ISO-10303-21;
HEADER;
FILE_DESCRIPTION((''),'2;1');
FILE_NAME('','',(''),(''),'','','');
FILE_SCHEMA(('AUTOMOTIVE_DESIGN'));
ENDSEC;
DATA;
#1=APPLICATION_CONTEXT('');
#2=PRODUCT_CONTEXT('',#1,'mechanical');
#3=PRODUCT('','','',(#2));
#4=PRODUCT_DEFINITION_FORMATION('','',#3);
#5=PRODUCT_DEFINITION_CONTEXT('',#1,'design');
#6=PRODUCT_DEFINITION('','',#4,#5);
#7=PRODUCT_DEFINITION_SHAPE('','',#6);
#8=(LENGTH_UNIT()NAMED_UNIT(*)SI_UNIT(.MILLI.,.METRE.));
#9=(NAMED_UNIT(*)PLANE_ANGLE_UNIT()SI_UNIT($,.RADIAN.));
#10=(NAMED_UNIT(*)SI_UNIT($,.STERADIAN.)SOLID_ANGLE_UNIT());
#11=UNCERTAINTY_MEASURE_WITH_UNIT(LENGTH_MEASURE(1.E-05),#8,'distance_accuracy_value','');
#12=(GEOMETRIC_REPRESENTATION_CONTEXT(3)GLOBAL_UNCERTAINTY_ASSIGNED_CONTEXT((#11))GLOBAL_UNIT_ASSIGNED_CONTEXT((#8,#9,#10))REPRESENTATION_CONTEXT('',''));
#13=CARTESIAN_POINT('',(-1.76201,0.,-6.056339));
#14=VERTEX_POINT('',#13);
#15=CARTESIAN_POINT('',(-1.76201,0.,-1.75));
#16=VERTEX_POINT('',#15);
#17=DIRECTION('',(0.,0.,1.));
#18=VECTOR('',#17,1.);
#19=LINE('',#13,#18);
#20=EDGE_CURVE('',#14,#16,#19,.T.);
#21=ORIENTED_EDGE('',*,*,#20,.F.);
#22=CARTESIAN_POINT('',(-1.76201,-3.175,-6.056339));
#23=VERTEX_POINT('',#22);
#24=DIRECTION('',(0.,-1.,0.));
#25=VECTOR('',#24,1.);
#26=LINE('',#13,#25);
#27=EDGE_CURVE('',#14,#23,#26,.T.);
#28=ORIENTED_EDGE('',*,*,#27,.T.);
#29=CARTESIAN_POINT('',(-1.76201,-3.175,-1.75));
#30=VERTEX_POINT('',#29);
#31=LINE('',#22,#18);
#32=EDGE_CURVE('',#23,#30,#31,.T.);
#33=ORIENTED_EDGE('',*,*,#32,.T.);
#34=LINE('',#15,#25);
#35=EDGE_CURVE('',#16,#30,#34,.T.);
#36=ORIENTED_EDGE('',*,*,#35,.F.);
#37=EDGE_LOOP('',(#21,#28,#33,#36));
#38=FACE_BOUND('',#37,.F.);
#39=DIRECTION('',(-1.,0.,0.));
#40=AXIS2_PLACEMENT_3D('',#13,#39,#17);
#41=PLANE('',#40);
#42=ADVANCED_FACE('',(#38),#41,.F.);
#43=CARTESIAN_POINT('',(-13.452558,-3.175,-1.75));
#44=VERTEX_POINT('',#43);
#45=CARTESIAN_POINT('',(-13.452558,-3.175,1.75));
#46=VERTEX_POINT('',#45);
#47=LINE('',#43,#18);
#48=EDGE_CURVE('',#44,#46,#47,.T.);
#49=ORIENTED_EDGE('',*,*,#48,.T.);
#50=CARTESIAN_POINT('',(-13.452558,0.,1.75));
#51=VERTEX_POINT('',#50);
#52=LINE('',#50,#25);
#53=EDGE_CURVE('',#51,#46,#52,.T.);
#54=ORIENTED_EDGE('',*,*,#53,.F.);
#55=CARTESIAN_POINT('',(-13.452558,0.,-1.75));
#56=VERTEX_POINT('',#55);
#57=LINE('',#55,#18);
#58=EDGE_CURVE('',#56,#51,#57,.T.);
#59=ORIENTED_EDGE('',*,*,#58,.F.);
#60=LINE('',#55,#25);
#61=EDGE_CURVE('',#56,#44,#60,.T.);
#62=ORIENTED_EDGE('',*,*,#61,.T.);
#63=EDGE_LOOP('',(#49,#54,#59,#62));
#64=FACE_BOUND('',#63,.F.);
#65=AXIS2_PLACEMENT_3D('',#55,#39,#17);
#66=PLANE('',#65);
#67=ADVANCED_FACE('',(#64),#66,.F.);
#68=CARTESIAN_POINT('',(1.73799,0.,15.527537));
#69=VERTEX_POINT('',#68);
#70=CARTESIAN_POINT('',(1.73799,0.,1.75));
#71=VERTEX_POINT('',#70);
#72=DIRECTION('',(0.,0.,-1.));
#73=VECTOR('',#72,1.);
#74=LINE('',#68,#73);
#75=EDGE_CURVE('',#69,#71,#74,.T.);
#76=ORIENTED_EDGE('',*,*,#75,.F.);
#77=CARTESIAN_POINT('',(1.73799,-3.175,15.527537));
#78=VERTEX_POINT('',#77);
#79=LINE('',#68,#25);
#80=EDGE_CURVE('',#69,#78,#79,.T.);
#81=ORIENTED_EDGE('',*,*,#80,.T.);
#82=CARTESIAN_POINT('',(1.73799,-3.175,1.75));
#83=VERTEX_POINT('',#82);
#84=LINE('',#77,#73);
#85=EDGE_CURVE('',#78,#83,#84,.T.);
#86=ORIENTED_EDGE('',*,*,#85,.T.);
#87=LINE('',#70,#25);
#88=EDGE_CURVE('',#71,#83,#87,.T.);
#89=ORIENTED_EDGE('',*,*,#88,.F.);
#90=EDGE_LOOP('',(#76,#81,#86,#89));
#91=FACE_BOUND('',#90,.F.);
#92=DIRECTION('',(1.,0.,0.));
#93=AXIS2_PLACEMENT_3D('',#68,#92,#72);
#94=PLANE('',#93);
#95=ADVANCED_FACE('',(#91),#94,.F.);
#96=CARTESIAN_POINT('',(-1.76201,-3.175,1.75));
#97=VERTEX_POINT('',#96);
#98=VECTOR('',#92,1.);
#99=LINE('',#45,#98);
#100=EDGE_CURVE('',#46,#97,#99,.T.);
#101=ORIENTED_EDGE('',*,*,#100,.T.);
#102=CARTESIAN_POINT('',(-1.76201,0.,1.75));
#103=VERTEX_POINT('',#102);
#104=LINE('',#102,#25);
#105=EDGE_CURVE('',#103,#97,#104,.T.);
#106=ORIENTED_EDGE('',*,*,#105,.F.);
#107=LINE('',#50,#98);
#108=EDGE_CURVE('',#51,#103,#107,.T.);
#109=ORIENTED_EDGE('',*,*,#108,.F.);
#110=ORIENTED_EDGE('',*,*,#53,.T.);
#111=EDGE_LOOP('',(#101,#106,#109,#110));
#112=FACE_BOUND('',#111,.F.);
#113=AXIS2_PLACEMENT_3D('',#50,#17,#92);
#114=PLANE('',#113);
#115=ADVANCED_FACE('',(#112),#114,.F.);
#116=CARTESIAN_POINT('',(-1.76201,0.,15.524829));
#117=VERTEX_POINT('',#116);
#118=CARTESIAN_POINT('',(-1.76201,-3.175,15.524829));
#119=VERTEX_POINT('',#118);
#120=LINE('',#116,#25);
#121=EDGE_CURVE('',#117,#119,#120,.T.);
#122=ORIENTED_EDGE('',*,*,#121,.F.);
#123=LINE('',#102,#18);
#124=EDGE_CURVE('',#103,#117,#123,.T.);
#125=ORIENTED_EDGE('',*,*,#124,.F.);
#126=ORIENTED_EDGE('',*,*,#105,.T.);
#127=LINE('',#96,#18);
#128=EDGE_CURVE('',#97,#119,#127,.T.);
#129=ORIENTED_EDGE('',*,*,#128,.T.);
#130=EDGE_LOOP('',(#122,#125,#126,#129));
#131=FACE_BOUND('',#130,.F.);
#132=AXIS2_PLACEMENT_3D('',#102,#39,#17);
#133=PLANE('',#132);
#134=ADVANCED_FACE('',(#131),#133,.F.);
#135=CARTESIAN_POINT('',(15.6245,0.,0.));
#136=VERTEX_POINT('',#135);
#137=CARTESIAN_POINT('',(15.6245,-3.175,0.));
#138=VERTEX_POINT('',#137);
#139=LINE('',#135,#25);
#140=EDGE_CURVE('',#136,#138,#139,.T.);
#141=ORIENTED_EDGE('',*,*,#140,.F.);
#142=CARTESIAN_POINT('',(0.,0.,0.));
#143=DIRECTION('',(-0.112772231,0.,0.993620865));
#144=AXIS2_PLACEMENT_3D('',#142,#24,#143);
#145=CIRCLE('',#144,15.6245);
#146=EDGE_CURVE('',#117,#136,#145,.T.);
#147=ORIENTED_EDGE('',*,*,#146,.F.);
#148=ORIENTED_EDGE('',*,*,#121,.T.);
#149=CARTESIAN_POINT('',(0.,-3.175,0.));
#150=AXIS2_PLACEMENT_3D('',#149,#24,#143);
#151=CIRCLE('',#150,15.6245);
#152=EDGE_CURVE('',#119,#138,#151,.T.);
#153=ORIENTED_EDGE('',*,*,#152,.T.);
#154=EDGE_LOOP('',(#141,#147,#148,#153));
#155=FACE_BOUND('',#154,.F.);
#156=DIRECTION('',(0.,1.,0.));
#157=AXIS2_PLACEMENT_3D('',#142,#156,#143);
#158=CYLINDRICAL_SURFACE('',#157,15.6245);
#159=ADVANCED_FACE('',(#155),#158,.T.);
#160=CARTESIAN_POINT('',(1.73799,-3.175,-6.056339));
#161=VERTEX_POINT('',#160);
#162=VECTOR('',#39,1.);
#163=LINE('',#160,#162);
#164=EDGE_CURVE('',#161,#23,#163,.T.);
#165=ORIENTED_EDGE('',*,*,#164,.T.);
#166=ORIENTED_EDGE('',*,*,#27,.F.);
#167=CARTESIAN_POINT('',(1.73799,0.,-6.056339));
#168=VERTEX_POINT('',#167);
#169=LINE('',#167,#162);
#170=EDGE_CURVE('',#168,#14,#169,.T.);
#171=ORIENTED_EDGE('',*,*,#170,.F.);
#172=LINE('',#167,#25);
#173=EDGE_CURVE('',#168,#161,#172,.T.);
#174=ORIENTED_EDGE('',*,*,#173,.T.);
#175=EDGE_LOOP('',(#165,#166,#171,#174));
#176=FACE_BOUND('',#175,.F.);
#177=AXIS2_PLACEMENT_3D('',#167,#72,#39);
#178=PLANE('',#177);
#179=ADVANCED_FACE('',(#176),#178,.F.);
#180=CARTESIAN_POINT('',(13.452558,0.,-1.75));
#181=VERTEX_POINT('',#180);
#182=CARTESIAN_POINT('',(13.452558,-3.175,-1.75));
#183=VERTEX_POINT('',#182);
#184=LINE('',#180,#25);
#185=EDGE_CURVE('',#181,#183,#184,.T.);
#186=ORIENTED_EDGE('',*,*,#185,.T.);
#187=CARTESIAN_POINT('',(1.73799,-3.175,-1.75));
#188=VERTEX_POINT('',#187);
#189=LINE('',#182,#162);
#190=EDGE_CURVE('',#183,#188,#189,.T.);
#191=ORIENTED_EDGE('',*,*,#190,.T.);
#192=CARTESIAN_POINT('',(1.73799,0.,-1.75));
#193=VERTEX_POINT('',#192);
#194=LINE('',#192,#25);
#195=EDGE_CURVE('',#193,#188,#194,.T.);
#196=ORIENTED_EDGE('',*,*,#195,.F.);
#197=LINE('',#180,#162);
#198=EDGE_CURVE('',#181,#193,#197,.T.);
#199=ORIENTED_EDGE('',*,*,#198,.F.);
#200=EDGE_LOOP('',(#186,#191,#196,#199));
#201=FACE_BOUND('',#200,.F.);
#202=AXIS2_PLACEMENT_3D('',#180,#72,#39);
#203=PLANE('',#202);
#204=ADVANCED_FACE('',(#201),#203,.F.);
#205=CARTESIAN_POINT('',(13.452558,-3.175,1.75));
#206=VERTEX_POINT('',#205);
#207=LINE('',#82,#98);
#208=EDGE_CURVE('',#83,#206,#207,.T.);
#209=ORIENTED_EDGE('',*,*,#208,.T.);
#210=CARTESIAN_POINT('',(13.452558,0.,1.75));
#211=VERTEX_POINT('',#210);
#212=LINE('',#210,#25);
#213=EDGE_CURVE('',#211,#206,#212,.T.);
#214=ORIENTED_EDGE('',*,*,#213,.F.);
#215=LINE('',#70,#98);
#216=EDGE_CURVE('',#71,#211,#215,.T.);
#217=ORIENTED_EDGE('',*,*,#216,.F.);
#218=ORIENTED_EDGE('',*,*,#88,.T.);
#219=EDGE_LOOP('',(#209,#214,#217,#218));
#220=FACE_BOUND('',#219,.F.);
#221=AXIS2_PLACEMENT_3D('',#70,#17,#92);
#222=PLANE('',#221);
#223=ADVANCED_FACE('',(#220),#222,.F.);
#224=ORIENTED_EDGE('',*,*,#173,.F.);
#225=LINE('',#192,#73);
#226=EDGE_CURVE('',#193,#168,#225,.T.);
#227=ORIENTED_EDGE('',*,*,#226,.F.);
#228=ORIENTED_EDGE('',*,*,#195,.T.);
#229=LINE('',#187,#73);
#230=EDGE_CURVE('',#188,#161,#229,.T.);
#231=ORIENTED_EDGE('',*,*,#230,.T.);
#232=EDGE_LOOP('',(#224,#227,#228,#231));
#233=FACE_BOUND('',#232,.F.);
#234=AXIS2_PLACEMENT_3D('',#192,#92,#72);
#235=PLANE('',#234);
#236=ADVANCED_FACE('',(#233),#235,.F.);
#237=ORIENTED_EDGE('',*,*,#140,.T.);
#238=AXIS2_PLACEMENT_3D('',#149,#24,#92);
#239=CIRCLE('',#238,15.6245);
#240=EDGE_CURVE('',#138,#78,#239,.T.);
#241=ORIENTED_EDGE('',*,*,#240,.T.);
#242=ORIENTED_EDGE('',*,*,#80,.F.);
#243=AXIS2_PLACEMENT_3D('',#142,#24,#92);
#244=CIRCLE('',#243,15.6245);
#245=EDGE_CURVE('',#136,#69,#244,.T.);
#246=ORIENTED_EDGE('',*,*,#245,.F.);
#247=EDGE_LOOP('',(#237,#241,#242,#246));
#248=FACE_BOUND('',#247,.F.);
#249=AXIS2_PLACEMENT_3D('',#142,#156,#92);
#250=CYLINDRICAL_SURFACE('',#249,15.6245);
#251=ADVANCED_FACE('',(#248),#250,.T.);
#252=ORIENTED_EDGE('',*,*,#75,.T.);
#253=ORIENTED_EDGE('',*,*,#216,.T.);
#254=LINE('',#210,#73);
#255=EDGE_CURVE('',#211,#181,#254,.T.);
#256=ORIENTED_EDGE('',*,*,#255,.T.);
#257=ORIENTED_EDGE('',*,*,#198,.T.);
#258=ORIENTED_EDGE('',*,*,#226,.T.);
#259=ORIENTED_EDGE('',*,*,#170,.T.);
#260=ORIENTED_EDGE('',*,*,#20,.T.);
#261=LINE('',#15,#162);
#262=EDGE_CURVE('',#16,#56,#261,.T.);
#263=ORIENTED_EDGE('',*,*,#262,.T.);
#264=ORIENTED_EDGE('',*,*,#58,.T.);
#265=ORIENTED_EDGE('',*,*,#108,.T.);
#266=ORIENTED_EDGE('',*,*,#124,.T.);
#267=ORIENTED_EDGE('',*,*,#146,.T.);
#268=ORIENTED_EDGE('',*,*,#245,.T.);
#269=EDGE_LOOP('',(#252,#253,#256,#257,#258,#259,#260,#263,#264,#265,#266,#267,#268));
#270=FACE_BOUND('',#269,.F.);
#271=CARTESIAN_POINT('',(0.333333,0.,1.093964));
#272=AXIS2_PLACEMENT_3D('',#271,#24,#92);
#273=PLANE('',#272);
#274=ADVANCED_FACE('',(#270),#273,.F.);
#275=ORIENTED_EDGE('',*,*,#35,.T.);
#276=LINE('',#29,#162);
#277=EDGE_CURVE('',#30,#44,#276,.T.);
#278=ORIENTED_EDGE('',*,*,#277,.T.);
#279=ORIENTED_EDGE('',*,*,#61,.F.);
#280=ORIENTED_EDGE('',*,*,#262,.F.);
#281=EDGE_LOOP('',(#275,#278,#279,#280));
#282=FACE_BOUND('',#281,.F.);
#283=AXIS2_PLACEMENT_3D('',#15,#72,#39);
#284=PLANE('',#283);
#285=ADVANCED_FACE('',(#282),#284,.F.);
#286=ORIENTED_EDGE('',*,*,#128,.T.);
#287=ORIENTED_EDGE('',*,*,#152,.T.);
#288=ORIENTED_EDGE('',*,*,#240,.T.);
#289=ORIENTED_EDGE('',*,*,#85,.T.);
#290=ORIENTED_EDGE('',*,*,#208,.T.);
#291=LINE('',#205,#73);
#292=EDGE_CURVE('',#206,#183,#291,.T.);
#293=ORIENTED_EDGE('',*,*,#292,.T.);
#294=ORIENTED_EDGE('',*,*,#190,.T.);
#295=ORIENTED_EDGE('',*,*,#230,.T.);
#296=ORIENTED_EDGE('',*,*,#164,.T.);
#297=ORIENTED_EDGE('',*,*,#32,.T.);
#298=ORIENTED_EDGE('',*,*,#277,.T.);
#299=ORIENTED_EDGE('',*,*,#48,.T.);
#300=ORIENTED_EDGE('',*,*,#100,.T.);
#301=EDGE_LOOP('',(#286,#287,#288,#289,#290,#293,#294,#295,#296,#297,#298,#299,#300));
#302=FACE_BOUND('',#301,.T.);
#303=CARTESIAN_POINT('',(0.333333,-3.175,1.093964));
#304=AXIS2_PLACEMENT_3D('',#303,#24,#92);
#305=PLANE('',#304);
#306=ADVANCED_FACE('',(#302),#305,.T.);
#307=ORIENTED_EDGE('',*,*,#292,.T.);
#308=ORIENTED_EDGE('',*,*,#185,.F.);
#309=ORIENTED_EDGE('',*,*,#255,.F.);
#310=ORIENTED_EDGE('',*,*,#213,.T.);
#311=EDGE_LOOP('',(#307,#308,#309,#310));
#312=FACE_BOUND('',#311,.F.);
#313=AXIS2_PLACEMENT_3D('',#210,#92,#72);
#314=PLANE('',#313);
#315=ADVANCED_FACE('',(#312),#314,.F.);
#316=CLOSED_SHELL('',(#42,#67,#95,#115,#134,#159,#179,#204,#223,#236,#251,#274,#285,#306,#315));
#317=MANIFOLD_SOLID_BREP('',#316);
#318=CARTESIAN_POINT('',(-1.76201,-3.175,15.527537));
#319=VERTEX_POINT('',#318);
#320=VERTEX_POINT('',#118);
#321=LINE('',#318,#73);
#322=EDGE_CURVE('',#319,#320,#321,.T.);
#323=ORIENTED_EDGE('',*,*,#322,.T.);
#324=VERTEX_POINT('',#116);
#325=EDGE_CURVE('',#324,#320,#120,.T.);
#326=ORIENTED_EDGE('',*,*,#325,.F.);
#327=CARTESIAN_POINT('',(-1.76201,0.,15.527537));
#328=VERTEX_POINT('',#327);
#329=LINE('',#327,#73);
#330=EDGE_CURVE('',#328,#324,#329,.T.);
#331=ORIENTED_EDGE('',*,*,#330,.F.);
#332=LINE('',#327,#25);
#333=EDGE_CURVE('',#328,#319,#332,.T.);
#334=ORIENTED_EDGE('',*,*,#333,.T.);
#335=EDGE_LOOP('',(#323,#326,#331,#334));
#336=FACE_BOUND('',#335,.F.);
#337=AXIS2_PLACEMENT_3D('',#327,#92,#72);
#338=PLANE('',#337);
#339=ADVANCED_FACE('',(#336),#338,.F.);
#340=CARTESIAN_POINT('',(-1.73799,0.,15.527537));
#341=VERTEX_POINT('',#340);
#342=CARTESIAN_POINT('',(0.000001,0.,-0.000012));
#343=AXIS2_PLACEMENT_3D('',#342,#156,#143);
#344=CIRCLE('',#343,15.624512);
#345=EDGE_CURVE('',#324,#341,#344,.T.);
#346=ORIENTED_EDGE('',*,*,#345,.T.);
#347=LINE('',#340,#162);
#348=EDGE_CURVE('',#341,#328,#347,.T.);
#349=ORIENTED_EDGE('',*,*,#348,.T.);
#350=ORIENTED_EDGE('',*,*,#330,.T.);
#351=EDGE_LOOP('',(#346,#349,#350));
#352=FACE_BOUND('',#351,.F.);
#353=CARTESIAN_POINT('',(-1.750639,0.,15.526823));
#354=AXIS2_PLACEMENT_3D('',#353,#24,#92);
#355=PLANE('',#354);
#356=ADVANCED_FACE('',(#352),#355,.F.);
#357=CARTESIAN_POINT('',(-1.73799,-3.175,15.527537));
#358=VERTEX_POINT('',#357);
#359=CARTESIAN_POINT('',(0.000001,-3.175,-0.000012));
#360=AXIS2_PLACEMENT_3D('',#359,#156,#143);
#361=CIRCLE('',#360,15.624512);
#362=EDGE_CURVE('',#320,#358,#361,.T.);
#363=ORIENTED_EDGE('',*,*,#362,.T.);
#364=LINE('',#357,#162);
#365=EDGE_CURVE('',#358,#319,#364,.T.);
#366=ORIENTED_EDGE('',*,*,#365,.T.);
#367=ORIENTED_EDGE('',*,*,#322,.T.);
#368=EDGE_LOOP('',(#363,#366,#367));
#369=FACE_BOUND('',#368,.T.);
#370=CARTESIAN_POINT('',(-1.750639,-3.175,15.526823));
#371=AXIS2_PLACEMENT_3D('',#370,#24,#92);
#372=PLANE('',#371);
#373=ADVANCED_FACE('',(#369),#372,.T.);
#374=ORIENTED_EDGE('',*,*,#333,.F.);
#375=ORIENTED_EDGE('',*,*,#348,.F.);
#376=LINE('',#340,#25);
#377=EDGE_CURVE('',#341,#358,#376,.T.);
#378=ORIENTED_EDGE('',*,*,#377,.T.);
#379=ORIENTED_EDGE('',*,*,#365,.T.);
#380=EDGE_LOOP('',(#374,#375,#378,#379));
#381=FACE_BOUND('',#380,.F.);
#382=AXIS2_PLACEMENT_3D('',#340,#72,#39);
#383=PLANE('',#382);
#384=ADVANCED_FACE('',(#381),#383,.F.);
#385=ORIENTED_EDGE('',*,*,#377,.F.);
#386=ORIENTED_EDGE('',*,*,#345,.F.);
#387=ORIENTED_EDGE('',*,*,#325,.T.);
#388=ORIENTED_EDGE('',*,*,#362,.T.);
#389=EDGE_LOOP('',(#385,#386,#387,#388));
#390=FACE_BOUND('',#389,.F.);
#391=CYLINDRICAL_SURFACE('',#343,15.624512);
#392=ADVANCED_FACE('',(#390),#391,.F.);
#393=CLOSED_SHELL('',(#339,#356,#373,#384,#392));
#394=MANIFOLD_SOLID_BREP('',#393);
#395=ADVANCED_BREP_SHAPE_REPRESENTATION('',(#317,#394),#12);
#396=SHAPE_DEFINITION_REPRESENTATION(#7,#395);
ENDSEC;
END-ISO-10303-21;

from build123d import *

# Parameters (mm, degrees)
F1_DEPTH = 3.175


# Not quite as in the source:
# - a length typed as a fraction of an inch, garbled in the dataset ("3 / 203.2 mm" for 3/8 in), is restored


with BuildPart() as f1:
    # F0 (on Front) → F1 (new body)
    with BuildSketch(Plane.XZ):
        with BuildLine():
            ThreePointArc((-1.7620097291, 15.5248292089), (-10.4065959669, -11.6545167481), (15.6245, 0))
            ThreePointArc((15.6245, 0), (11.64646361, 10.4156077898), (1.7379902709, 15.52753651))
            Line((1.7379902709, 15.52753651), (1.7379902709, 1.75))
            Line((1.7379902709, 1.75), (13.4525578469, 1.75))
            Line((13.4525578469, 1.75), (13.4525578469, -1.75))
            Line((13.4525578469, -1.75), (1.7379902709, -1.75))
            Line((1.7379902709, -1.75), (1.7379902709, -6.05633948))
            Line((1.7379902709, -6.05633948), (-1.7620097291, -6.05633948))
            Line((-1.7620097291, -6.05633948), (-1.7620097291, -1.75))
            Line((-1.7620097291, -1.75), (-13.4525578469, -1.75))
            Line((-13.4525578469, -1.75), (-13.4525578469, 1.75))
            Line((-13.4525578469, 1.75), (-1.7620097291, 1.75))
            Line((-1.7620097291, 1.75), (-1.7620097291, 15.5248292089))
        make_face()
    extrude(amount=F1_DEPTH)


with BuildPart() as f1b:
    # F0 (on Front) → F1, piece 2 (new body)
    with BuildSketch(Plane.XZ):
        with BuildLine():
            Line((-1.7620097291, 15.52753651), (-1.7620097291, 15.5248292089))
            ThreePointArc((-1.7620097291, 15.5248292089), (-1.7500005235, 15.5261875043), (-1.7379902709, 15.52753651))
            Line((-1.7379902709, 15.52753651), (-1.7620097291, 15.52753651))
        make_face()
    extrude(amount=F1_DEPTH)


solid = Compound([f1.part, f1b.part])
